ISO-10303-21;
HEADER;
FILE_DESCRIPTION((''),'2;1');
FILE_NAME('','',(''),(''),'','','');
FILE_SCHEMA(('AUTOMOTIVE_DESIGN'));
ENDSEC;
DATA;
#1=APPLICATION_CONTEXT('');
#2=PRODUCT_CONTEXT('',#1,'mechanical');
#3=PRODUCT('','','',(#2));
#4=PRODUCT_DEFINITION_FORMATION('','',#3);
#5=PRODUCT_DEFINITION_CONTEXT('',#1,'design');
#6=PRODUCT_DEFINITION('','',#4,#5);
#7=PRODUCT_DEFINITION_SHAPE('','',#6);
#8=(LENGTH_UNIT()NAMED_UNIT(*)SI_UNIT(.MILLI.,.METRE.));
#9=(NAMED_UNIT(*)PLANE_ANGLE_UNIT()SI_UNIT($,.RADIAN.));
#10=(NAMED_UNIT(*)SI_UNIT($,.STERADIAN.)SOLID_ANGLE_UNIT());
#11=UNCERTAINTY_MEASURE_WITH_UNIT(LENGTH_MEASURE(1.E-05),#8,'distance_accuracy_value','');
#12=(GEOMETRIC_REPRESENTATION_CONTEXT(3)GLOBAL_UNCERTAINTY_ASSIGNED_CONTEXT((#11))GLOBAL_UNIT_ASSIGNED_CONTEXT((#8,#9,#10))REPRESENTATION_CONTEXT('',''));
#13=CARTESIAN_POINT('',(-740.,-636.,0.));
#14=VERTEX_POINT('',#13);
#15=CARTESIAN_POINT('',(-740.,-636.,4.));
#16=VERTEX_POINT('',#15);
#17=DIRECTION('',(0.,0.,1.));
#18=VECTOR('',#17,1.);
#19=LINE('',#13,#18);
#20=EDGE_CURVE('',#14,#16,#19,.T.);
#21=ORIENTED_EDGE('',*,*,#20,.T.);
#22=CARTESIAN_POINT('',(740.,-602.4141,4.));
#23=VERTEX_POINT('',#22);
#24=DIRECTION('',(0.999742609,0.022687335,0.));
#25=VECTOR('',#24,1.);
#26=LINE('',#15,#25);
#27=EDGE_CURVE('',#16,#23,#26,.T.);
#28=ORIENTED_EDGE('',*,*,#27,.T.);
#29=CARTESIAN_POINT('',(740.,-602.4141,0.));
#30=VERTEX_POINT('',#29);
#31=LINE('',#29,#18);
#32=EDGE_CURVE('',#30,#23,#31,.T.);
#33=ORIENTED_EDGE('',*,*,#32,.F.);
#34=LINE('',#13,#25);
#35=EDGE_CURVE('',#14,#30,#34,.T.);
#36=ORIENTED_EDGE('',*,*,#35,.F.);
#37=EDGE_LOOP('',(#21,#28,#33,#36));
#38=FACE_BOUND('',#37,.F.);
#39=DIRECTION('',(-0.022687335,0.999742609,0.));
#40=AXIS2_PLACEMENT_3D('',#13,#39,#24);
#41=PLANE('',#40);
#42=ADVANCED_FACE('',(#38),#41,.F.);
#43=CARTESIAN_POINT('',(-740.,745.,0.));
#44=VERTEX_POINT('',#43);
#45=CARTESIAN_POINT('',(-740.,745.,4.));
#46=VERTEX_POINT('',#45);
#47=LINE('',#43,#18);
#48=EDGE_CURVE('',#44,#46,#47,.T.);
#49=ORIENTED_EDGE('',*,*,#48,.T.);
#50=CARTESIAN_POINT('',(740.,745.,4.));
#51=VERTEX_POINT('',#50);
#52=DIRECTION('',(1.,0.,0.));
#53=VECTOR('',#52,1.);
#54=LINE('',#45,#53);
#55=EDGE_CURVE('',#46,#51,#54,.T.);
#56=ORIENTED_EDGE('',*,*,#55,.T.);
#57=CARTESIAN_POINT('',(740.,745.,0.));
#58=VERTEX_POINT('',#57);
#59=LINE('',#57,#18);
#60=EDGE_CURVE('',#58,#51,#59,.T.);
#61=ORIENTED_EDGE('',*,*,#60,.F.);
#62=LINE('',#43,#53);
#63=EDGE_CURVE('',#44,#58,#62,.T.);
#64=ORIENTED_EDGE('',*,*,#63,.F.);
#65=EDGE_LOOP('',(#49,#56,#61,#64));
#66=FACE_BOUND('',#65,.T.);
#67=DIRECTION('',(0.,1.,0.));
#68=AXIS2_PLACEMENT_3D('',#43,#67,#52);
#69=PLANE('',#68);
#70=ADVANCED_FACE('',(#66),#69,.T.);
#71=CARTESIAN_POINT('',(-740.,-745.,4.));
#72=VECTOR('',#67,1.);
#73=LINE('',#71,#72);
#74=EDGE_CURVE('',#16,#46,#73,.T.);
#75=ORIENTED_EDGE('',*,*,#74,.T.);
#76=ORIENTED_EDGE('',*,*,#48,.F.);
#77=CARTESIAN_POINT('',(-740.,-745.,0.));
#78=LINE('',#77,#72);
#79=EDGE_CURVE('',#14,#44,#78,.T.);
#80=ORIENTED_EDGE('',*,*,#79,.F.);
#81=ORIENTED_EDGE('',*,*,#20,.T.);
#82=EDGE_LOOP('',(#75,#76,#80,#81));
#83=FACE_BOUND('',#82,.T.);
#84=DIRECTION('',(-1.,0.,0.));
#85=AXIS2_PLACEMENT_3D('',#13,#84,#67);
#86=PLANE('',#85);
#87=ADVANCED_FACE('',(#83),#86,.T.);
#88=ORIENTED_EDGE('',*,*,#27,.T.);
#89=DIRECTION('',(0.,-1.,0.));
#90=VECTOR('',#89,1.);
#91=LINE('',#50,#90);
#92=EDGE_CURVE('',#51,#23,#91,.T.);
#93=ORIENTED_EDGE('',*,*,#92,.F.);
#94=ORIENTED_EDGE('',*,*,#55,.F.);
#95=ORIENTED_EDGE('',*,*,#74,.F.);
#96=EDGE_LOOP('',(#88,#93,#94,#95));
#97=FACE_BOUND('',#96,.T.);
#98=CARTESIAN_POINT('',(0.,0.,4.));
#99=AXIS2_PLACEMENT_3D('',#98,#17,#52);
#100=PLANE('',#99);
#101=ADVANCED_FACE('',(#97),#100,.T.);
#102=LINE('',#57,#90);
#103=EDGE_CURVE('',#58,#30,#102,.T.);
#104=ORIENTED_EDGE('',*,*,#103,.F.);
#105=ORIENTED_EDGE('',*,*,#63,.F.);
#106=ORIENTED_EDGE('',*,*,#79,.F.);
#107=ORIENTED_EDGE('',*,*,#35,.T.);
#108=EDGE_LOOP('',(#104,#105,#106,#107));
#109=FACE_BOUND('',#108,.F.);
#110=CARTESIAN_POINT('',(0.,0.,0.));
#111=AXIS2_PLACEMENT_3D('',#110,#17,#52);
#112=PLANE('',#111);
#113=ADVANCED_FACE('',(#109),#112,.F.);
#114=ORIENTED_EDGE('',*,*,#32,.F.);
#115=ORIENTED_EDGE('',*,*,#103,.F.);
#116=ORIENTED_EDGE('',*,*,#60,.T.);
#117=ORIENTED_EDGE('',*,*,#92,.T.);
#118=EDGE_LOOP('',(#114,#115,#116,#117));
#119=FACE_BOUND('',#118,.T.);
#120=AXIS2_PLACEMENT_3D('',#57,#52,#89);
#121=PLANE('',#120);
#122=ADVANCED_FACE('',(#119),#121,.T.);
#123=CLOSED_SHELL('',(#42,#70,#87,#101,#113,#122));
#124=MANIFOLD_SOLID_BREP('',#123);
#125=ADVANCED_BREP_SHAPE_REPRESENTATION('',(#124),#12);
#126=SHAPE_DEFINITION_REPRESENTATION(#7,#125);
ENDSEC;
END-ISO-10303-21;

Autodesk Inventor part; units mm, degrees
ref_plane "YZ Plane" through (0, 0, 0) normal (1, 0, 0) x (0, 1, 0)
ref_plane "XZ Plane" through (0, 0, 0) normal (0, 1, 0) x (-1, 0, 0)
ref_plane "XY Plane" through (0, 0, 0) normal (0, 0, 1) x (1, 0, 0)
sketch "Sketch1" plane through (0, 0, 0) normal (0, 0, 1) x (1, 0, 0)
  line L0 (740, -745) -> (-740, -745)
  line L1 (-740, -745) -> (-740, 745)
  line L2 (-740, 745) -> (740, 745)
  line L3 (740, 745) -> (740, -745)
  line L4 (740, -745) -> (-740, 745) construction
  line L5 (-740, -745) -> (740, 745) construction
  line L6 (-740, -636) -> (740, -602.4141)
  point P0 (0, 0)
  dimension "d0" = 1480
  dimension "d1" = 1490
  dimension "d4" = 1.3
  dimension "d9" = 1381
  dimension "d10" = 109
extrude "Plate1" add sketch "Sketch1" along normal blind 4 contours L6 L1 L2 L3
sketch "Эскиз3" plane through (0, 0, 0) normal (0, 0, -1) x (-1, 0, 0)
  line L0 (636.5062, -289.7957) -> (636.5062, -787.9319) construction
  line L1 (636.5062, -787.9319) -> (596.8789, -787.9319) construction
  line L2 (596.8789, -787.9319) -> (596.8789, -289.7957) construction
  line L3 (596.8789, -289.7957) -> (636.5062, -289.7957) construction
  line L4 (210.5058, -492.5) -> (210.5058, -589.5) projected
  line L5 (210.5058, -589.5) -> (206.5068, -589.5) projected
  line L6 (-289.6228, -492.5) -> (-289.6228, -589.5) projected
  line L7 (-289.6228, -589.5) -> (-293.6218, -589.5) projected
  ellipse E0 centre (210.5058, 745.5) end of major axis (210.5058, 775.5) minor radius 0.6803 (210.5058, 715.5) -> (210.5058, 775.5) ccw projected
  line L8 (210.5058, 715.5) -> (206.5068, 715.5) projected
  ellipse E1 centre (-289.6228, 745.5) end of major axis (-289.6228, 775.5) minor radius 0.6803 (-289.6228, 715.5) -> (-289.6228, 775.5) ccw projected
  line L9 (-289.6228, 715.5) -> (-293.6218, 715.5) projected
  line L10 (-739.3197, -489) -> (-710, -489) projected
  line L11 (-710, -489) -> (-710, -485) projected
  line L12 (-739.3197, 7.6667) -> (-710, 7.6667) projected
  line L13 (-710, 7.6667) -> (-710, 11.6667) projected
  line L14 (-739.3197, 504.3333) -> (-710, 504.3333) projected
  line L15 (-710, 504.3333) -> (-710, 508.3333) projected
  line L16 (710, -489) -> (710, -485) projected
  line L17 (710, 7.6667) -> (710, 11.6667) projected
  line L18 (710, 504.3333) -> (710, 508.3333) projected
  line L19 (710, -489) -> (680, -489)
  line L20 (710, 7.6667) -> (680, 7.6667)
  line L21 (710, 504.3333) -> (680, 504.3333)
  point P0 (0, 0)
  dimension "d14" = 30
  dimension "d15" = 30
  dimension "d16" = 30
mark "Маркировка1"
equation "\"d0\" = Лист_ширина"
equation "\"d2\" = Thickness"
equation "\"BendRadius\" = Thickness"
equation "\"BendReliefWidth\" = Thickness"
equation "\"BendReliefDepth\" = 0.5 * Thickness"
equation "\"CornerReliefSize\" = 4 * Thickness"
equation "\"MinimumRemnant\" = 2 * Thickness"
equation "\"TransitionRadius\" = BendRadius"
equation "\"JacobiRadiusSize\" = BendRadius"
equation "\"GapSize\" = Thickness"
equation "\"Лист_ширина\" = 1480"
equation "\"Thickness\" = 4"
properties part number "GBK 2311 shield 7" material "Steel"
